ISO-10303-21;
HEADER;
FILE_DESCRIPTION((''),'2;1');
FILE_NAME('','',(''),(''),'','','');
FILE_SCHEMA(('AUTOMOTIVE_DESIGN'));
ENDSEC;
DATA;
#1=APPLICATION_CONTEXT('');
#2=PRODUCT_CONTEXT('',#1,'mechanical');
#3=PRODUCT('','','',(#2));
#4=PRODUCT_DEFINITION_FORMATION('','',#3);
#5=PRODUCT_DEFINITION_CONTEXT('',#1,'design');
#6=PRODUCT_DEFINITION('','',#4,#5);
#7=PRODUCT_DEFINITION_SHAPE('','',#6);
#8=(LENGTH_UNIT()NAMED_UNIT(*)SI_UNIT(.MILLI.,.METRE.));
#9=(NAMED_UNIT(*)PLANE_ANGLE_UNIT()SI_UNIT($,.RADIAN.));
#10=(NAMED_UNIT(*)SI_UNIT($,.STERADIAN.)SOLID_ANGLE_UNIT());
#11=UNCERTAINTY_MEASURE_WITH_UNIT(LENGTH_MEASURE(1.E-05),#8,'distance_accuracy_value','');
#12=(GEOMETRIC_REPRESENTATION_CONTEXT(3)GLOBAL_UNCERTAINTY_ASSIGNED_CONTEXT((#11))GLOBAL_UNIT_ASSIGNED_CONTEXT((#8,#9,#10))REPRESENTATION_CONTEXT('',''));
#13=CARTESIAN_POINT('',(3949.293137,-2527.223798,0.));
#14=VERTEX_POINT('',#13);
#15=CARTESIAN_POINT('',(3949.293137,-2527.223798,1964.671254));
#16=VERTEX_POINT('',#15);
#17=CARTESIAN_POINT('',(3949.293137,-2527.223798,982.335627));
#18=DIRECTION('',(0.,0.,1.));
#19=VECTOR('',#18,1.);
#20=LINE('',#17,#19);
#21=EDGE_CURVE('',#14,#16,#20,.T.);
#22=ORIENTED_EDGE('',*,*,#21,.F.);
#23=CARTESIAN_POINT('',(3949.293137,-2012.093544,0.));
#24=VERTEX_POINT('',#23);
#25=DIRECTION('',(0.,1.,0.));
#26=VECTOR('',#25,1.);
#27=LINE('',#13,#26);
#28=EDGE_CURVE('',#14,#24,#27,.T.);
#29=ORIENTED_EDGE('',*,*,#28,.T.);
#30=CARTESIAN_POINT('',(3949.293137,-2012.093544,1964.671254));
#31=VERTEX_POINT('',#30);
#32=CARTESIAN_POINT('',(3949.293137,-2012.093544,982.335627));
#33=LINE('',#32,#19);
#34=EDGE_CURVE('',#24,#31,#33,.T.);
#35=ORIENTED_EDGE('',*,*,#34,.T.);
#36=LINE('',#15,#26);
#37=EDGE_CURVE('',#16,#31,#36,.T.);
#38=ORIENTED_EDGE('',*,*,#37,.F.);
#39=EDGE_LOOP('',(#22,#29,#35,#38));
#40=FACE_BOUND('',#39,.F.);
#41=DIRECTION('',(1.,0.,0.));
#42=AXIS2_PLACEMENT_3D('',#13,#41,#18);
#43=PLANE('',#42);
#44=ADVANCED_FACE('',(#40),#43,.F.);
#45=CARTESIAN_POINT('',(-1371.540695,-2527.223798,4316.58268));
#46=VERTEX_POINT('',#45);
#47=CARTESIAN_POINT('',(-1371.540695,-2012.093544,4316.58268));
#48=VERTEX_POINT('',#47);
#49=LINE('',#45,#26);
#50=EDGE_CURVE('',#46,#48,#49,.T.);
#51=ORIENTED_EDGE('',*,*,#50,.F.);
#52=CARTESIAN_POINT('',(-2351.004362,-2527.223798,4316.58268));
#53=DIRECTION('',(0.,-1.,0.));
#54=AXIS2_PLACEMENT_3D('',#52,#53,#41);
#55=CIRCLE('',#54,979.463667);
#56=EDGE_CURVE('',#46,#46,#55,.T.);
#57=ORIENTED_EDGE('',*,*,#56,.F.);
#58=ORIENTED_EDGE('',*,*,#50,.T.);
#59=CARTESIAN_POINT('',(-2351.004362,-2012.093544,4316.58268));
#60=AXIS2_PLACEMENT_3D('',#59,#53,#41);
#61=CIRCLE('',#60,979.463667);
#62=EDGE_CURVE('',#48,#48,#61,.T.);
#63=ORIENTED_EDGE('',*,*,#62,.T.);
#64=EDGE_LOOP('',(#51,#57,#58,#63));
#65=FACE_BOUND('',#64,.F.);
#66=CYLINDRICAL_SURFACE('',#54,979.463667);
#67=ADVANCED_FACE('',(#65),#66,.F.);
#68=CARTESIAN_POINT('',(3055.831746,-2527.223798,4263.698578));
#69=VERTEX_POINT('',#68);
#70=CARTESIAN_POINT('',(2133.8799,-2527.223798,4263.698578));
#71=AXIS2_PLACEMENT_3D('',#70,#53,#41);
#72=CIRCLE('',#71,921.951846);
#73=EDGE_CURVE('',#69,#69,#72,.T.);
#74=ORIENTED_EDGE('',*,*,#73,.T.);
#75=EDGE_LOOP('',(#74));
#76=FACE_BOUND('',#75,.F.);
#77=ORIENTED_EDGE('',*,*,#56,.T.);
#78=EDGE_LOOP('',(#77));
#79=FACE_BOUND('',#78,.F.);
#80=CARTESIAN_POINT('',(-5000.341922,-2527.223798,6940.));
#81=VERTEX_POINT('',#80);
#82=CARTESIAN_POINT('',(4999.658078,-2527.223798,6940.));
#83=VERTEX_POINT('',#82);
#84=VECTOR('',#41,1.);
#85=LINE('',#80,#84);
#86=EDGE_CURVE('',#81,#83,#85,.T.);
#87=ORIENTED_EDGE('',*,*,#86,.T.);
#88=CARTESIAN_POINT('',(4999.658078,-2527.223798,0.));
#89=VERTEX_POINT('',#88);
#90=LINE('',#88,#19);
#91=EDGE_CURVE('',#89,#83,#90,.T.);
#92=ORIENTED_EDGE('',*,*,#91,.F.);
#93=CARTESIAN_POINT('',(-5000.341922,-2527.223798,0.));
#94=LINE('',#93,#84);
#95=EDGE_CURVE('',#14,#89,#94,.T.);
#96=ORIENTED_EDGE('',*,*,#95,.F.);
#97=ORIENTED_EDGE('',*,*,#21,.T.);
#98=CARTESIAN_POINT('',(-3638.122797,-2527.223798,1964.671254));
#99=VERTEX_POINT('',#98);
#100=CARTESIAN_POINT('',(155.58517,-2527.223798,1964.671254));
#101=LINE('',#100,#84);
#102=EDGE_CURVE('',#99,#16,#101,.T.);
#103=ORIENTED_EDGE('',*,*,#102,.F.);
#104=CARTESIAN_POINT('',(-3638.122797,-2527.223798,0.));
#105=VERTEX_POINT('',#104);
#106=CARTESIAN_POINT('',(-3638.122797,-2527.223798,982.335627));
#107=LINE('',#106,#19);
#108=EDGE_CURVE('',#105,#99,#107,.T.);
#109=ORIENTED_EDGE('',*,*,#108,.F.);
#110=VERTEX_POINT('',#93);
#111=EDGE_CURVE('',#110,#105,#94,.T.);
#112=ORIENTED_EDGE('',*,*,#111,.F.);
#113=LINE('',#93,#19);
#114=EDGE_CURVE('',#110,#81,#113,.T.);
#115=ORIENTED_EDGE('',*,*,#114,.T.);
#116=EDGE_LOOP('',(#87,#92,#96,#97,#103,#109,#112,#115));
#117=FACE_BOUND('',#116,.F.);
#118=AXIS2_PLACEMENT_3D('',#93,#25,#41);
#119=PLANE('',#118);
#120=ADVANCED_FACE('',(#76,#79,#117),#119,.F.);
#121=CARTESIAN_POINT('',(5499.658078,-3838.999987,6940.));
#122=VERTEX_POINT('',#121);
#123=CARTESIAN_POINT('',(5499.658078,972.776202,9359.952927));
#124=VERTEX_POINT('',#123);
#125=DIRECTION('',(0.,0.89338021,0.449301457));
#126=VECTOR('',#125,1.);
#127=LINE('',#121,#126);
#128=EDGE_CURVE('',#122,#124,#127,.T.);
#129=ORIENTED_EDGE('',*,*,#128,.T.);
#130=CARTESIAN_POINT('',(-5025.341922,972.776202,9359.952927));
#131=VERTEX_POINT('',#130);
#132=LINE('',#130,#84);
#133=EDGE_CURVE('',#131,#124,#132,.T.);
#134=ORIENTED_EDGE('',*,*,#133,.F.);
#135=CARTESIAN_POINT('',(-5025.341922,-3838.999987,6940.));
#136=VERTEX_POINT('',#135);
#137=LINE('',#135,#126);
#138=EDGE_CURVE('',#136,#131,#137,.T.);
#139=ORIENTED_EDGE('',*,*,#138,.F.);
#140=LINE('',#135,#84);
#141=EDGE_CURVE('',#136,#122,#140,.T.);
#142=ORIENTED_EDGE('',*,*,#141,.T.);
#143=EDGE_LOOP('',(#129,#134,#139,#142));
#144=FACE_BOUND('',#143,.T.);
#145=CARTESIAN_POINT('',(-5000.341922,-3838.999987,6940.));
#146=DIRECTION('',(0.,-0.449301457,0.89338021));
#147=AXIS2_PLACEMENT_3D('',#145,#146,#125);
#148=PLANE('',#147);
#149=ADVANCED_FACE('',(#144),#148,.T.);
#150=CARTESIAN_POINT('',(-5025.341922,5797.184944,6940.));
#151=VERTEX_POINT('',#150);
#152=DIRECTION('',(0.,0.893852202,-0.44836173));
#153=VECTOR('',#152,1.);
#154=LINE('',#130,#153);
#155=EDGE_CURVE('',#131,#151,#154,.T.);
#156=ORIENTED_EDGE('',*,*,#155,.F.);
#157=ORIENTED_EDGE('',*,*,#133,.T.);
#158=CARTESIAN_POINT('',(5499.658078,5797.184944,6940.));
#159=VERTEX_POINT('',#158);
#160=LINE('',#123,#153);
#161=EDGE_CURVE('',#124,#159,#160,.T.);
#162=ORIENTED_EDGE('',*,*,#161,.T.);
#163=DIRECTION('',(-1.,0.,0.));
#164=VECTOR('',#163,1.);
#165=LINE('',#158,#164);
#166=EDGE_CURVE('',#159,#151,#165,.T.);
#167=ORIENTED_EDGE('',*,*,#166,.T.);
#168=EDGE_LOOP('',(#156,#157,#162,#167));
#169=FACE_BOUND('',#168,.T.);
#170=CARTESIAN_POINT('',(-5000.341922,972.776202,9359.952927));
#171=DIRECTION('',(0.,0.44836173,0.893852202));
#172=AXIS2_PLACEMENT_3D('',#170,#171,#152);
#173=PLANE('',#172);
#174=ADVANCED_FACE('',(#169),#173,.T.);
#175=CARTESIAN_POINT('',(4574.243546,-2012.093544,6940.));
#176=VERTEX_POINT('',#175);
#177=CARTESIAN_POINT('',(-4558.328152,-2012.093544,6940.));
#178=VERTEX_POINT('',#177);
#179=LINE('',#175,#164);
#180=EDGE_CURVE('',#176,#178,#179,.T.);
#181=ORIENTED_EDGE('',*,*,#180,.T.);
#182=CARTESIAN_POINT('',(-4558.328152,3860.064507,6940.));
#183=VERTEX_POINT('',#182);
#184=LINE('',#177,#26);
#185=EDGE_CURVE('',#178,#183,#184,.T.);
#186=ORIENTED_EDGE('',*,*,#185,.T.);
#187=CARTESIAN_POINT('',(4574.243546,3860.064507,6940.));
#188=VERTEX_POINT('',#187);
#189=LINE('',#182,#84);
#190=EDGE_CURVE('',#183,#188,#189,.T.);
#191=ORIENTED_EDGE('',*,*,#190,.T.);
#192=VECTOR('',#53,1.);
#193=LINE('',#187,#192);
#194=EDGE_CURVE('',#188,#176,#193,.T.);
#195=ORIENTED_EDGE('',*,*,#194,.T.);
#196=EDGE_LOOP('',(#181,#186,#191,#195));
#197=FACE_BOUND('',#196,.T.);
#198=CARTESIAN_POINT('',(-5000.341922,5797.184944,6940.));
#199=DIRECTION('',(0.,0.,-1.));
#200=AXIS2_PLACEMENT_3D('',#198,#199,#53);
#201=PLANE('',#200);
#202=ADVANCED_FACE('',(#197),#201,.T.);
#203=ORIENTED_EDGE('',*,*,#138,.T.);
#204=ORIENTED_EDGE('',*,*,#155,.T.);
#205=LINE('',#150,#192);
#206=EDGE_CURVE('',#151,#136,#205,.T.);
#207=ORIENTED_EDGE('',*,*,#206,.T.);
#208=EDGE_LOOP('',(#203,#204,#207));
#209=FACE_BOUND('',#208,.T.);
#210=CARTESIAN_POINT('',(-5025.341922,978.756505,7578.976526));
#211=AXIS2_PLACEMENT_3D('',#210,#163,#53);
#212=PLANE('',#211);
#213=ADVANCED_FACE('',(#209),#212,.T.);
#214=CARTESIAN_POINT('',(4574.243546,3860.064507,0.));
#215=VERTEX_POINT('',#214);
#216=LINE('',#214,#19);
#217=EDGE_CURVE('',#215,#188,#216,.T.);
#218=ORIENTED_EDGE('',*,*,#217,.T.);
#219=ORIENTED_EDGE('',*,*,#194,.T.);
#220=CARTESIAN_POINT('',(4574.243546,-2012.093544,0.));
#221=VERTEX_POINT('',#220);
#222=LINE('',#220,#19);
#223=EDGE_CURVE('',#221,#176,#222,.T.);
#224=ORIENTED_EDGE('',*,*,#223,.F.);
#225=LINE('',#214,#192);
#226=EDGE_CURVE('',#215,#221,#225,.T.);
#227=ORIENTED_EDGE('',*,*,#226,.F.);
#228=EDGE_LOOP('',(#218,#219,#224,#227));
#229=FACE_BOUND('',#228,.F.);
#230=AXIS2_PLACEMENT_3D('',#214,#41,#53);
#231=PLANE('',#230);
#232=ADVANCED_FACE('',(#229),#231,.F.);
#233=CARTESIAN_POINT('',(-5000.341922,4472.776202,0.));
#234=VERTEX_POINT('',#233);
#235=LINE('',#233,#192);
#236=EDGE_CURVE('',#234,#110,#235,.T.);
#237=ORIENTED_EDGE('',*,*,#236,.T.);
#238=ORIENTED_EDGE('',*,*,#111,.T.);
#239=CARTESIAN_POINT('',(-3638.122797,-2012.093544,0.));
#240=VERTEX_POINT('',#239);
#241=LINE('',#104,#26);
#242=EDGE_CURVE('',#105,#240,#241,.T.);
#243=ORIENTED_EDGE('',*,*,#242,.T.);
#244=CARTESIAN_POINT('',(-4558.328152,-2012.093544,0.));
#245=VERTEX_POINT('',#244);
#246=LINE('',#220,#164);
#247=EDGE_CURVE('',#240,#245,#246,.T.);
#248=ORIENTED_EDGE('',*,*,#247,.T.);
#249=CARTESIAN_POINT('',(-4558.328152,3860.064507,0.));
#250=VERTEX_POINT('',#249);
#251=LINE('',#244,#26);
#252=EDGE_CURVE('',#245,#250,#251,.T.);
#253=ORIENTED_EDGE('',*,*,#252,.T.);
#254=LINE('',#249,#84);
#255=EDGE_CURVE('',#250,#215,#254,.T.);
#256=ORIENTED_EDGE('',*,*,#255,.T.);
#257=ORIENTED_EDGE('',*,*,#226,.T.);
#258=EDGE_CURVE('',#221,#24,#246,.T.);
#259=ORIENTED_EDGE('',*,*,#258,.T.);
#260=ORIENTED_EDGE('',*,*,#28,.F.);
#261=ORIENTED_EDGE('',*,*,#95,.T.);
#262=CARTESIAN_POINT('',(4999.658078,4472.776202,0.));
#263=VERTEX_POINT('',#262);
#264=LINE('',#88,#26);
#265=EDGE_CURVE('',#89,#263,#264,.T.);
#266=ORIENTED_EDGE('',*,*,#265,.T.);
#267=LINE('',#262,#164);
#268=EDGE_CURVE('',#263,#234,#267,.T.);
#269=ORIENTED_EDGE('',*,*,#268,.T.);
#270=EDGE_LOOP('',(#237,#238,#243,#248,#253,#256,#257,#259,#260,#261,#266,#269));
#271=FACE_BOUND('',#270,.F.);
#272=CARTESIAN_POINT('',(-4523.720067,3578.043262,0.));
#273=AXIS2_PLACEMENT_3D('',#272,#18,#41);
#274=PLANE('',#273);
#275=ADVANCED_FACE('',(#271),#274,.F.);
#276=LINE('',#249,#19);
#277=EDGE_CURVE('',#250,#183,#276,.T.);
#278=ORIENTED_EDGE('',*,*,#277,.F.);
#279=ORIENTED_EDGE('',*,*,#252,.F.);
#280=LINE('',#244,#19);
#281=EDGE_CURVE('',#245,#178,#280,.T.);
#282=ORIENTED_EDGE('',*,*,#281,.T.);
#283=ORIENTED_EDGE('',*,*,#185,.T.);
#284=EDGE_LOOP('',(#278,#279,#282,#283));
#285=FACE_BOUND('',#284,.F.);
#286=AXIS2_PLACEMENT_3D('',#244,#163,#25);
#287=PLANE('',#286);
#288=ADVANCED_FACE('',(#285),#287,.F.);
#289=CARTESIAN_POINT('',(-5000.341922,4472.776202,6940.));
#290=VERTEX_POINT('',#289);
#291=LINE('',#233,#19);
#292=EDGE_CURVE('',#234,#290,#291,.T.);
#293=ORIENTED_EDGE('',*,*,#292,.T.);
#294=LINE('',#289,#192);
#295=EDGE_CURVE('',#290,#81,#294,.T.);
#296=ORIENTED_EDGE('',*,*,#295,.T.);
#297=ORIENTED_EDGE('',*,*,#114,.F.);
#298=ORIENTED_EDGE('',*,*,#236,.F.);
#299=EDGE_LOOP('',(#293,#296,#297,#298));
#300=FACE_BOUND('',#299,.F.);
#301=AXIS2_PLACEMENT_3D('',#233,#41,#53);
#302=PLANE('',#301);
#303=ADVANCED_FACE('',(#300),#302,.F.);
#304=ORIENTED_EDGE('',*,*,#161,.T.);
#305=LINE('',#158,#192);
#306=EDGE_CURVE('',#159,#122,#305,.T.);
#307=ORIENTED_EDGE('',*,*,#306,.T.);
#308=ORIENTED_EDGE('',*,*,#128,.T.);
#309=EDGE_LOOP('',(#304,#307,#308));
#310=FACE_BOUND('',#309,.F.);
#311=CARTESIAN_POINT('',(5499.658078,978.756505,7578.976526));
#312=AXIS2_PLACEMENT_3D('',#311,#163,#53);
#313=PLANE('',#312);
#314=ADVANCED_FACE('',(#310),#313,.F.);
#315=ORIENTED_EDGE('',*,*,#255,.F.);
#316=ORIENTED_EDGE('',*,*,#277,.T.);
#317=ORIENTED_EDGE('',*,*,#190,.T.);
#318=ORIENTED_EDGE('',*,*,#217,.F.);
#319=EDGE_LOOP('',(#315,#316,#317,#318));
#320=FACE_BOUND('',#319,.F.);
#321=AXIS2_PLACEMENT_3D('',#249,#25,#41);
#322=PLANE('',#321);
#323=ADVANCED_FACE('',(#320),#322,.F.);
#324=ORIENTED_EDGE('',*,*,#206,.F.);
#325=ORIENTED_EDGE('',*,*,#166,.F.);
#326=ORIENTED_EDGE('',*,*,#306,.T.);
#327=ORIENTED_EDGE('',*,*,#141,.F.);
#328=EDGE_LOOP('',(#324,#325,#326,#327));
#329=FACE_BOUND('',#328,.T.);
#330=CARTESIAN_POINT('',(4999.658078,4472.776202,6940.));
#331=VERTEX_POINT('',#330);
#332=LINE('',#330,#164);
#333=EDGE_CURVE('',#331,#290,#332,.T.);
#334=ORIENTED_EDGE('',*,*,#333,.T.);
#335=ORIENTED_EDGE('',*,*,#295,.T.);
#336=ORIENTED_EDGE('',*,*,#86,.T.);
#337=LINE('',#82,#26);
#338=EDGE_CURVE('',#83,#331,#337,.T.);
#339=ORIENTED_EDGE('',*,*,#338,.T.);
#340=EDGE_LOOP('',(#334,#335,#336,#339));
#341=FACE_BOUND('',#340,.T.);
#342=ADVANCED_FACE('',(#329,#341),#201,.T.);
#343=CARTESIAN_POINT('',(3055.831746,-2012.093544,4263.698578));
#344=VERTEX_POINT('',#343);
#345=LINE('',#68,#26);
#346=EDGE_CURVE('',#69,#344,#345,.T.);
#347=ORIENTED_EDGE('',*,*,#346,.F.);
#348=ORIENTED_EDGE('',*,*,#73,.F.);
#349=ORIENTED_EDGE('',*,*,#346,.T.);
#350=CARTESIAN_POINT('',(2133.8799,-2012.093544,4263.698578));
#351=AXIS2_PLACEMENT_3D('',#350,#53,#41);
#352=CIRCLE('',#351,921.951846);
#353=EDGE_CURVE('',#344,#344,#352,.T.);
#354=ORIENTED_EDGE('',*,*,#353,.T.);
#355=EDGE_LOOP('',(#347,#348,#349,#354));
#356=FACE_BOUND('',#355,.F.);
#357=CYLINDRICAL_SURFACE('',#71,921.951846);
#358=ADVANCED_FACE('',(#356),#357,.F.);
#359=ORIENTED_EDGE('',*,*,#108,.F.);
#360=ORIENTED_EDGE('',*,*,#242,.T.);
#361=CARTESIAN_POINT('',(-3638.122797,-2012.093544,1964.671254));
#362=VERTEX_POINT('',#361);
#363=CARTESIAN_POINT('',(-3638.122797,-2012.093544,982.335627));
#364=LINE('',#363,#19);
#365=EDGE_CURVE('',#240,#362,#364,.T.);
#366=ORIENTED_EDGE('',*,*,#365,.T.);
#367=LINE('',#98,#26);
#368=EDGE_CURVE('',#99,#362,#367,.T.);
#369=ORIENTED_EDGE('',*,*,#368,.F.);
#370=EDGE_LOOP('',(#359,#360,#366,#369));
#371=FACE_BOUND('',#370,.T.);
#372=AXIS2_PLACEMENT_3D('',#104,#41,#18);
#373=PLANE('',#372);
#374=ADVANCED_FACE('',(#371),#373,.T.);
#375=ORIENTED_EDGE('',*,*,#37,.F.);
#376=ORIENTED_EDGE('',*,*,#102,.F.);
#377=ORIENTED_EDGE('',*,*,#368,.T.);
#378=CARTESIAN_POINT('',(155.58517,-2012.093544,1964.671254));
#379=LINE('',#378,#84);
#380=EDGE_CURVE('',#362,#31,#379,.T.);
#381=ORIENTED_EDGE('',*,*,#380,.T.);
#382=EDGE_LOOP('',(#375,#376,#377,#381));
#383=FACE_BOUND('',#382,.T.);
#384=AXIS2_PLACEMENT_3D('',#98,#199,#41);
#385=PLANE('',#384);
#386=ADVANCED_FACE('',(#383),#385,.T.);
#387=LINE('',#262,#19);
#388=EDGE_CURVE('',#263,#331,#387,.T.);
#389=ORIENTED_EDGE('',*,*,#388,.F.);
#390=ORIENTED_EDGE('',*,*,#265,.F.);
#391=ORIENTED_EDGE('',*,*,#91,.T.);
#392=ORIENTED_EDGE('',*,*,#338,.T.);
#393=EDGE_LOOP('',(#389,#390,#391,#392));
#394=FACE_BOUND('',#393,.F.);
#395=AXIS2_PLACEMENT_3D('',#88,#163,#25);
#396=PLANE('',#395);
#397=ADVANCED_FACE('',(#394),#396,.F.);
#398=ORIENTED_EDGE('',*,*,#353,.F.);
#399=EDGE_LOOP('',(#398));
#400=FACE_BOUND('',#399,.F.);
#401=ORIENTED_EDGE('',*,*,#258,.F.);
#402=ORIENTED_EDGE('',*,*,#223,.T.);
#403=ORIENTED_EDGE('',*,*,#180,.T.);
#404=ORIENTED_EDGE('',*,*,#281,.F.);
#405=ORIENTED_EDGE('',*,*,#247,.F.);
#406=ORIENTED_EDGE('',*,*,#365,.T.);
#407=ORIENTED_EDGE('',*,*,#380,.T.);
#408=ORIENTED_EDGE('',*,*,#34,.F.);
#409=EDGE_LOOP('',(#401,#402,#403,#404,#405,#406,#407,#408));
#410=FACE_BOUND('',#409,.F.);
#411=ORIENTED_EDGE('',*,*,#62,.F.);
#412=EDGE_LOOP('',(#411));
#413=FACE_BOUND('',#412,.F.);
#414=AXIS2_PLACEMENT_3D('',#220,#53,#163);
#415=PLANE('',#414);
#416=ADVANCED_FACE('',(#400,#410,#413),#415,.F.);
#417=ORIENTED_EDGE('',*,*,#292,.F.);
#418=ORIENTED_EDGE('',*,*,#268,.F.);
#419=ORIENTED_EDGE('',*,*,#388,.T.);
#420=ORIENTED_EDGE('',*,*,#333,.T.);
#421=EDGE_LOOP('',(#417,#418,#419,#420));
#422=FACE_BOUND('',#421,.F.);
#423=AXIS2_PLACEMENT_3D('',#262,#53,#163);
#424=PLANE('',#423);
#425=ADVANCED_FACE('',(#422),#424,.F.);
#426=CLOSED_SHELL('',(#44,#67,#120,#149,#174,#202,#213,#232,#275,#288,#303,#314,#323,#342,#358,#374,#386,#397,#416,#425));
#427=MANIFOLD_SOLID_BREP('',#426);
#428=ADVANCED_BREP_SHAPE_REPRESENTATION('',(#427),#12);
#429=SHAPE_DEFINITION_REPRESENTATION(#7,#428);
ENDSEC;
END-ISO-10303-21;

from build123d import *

# Parameters (mm, degrees)
F0_W          = 1724.6506214142
F0_H          = 612.7116954488
F0_W_2        = 1545.5847382545
F0_W_3        = 4094.7958827019
F0_W_4        = 7587.415933609
F0_H_2        = 515.1302540141
F0_W_5        = 442.0137703419
F0_H_3        = 2709.7913920879
F0_W_6        = 425.414532423
F0_H_4        = 1063.8439655304
F1_DEPTH      = 6940
F2_W          = 7587.415933609
F2_H          = 1964.671254158
F3_DEPTH      = 515.1302540141
F5_DEPTH      = 25
F5_DEPTH_BACK = 10500
F6_R          = 979.4636667312
F7_DEPTH      = 515.1302540141
F6_R_2        = 921.9518456682
F8_DEPTH      = 515.1312540141


# Not quite as in the source:
# - a feature names something its author has since deleted; it is built from what else it names


with BuildPart() as f1:
    # F0 (on Top) → F1 (new body)
    with BuildSketch(Plane.XY):
        Polygon((-3636.5358829498, 4472.7762019796), (-5000.3419220448, 4472.7762019796), (-5000.3419220448, 2272.7479934692), (-4558.3281517029, 2272.7479934692), (-4558.3281517029, 3860.0645065308), (-3636.5358829498, 3860.0645065308), align=None)
        with Locations((-2774.2105722427, 4166.4203542552)):
            Rectangle(F0_W, F0_H)
        with Locations((-1139.0928924084, 4166.4203542552)):
            Rectangle(F0_W_2, F0_H)
        Polygon((4999.6580779552, 4472.7762019796), (3728.4953594208, 4472.7762019796), (3728.4953594208, 3860.0645065308), (4574.2435455322, 3860.0645065308), (4574.2435455322, 2734.4160079956), (4999.6580779552, 2734.4160079956), align=None)
        Polygon((-4558.3281517029, -437.0433986187), (-5000.3419220448, -437.0433986187), (-5000.3419220448, -2527.2237980204), (-3638.1227970123, -2527.2237980204), (-3638.1227970123, -2012.0935440063), (-4558.3281517029, -2012.0935440063), align=None)
        Polygon((3949.2931365967, -2012.0935440063), (3949.2931365967, -2527.2237980204), (4999.6580779552, -2527.2237980204), (4999.6580779552, 1670.5720424652), (4574.2435455322, 1670.5720424652), (4574.2435455322, -2012.0935440063), align=None)
        with Locations((1681.0974180698, 4166.4203542552)):
            Rectangle(F0_W_3, F0_H)
        with Locations((155.5851697922, -2269.6586710134)):
            Rectangle(F0_W_4, F0_H_2)
        with Locations((-4779.3350368738, 917.8522974253)):
            Rectangle(F0_W_5, F0_H_3)
        with Locations((4786.9508117437, 2202.4940252304)):
            Rectangle(F0_W_6, F0_H_4)
    extrude(amount=F1_DEPTH)

    # F2 (on face) → F3 (cut, through all)
    with BuildSketch(Plane.XZ.offset(2527.2237980204)):
        with Locations((155.5851697922, 982.335627079)):
            Rectangle(F2_W, F2_H)
    extrude(amount=-F3_DEPTH, mode=Mode.SUBTRACT)

    # F4 (on face) → F5 (join, two sides)
    with BuildSketch(Plane(origin=(-5000.3419220448, 0, 0), x_dir=(0, -1, 0), z_dir=(-1, 0, 0))) as f5_sk:
        Polygon((-972.7762019796, 9359.9529266357), (-5797.1849441528, 6940), (-4472.7762019796, 6940), (2527.2237980204, 6940), (3838.9999866486, 6940), align=None)
    extrude(amount=F5_DEPTH)
    extrude(f5_sk.sketch, amount=-F5_DEPTH_BACK)

    # F6 (on face) → F7 (cut, through all)
    with BuildSketch(Plane.XZ.offset(2527.2237980204)):
        with Locations((-2351.0043621063, 4316.5826797485)):
            Circle(F6_R)
    extrude(amount=-F7_DEPTH, mode=Mode.SUBTRACT)

    # F6 (on face) → F8 (cut, through all)
    with BuildSketch(Plane.XZ.offset(2527.2237980204)):
        with Locations((-2351.0043621063, 4316.5826797485)):
            Circle(F6_R)
        with Locations((2133.8798999786, 4263.6985778809)):
            Circle(F6_R_2)
    extrude(amount=-F8_DEPTH, mode=Mode.SUBTRACT)


solid = f1.part
